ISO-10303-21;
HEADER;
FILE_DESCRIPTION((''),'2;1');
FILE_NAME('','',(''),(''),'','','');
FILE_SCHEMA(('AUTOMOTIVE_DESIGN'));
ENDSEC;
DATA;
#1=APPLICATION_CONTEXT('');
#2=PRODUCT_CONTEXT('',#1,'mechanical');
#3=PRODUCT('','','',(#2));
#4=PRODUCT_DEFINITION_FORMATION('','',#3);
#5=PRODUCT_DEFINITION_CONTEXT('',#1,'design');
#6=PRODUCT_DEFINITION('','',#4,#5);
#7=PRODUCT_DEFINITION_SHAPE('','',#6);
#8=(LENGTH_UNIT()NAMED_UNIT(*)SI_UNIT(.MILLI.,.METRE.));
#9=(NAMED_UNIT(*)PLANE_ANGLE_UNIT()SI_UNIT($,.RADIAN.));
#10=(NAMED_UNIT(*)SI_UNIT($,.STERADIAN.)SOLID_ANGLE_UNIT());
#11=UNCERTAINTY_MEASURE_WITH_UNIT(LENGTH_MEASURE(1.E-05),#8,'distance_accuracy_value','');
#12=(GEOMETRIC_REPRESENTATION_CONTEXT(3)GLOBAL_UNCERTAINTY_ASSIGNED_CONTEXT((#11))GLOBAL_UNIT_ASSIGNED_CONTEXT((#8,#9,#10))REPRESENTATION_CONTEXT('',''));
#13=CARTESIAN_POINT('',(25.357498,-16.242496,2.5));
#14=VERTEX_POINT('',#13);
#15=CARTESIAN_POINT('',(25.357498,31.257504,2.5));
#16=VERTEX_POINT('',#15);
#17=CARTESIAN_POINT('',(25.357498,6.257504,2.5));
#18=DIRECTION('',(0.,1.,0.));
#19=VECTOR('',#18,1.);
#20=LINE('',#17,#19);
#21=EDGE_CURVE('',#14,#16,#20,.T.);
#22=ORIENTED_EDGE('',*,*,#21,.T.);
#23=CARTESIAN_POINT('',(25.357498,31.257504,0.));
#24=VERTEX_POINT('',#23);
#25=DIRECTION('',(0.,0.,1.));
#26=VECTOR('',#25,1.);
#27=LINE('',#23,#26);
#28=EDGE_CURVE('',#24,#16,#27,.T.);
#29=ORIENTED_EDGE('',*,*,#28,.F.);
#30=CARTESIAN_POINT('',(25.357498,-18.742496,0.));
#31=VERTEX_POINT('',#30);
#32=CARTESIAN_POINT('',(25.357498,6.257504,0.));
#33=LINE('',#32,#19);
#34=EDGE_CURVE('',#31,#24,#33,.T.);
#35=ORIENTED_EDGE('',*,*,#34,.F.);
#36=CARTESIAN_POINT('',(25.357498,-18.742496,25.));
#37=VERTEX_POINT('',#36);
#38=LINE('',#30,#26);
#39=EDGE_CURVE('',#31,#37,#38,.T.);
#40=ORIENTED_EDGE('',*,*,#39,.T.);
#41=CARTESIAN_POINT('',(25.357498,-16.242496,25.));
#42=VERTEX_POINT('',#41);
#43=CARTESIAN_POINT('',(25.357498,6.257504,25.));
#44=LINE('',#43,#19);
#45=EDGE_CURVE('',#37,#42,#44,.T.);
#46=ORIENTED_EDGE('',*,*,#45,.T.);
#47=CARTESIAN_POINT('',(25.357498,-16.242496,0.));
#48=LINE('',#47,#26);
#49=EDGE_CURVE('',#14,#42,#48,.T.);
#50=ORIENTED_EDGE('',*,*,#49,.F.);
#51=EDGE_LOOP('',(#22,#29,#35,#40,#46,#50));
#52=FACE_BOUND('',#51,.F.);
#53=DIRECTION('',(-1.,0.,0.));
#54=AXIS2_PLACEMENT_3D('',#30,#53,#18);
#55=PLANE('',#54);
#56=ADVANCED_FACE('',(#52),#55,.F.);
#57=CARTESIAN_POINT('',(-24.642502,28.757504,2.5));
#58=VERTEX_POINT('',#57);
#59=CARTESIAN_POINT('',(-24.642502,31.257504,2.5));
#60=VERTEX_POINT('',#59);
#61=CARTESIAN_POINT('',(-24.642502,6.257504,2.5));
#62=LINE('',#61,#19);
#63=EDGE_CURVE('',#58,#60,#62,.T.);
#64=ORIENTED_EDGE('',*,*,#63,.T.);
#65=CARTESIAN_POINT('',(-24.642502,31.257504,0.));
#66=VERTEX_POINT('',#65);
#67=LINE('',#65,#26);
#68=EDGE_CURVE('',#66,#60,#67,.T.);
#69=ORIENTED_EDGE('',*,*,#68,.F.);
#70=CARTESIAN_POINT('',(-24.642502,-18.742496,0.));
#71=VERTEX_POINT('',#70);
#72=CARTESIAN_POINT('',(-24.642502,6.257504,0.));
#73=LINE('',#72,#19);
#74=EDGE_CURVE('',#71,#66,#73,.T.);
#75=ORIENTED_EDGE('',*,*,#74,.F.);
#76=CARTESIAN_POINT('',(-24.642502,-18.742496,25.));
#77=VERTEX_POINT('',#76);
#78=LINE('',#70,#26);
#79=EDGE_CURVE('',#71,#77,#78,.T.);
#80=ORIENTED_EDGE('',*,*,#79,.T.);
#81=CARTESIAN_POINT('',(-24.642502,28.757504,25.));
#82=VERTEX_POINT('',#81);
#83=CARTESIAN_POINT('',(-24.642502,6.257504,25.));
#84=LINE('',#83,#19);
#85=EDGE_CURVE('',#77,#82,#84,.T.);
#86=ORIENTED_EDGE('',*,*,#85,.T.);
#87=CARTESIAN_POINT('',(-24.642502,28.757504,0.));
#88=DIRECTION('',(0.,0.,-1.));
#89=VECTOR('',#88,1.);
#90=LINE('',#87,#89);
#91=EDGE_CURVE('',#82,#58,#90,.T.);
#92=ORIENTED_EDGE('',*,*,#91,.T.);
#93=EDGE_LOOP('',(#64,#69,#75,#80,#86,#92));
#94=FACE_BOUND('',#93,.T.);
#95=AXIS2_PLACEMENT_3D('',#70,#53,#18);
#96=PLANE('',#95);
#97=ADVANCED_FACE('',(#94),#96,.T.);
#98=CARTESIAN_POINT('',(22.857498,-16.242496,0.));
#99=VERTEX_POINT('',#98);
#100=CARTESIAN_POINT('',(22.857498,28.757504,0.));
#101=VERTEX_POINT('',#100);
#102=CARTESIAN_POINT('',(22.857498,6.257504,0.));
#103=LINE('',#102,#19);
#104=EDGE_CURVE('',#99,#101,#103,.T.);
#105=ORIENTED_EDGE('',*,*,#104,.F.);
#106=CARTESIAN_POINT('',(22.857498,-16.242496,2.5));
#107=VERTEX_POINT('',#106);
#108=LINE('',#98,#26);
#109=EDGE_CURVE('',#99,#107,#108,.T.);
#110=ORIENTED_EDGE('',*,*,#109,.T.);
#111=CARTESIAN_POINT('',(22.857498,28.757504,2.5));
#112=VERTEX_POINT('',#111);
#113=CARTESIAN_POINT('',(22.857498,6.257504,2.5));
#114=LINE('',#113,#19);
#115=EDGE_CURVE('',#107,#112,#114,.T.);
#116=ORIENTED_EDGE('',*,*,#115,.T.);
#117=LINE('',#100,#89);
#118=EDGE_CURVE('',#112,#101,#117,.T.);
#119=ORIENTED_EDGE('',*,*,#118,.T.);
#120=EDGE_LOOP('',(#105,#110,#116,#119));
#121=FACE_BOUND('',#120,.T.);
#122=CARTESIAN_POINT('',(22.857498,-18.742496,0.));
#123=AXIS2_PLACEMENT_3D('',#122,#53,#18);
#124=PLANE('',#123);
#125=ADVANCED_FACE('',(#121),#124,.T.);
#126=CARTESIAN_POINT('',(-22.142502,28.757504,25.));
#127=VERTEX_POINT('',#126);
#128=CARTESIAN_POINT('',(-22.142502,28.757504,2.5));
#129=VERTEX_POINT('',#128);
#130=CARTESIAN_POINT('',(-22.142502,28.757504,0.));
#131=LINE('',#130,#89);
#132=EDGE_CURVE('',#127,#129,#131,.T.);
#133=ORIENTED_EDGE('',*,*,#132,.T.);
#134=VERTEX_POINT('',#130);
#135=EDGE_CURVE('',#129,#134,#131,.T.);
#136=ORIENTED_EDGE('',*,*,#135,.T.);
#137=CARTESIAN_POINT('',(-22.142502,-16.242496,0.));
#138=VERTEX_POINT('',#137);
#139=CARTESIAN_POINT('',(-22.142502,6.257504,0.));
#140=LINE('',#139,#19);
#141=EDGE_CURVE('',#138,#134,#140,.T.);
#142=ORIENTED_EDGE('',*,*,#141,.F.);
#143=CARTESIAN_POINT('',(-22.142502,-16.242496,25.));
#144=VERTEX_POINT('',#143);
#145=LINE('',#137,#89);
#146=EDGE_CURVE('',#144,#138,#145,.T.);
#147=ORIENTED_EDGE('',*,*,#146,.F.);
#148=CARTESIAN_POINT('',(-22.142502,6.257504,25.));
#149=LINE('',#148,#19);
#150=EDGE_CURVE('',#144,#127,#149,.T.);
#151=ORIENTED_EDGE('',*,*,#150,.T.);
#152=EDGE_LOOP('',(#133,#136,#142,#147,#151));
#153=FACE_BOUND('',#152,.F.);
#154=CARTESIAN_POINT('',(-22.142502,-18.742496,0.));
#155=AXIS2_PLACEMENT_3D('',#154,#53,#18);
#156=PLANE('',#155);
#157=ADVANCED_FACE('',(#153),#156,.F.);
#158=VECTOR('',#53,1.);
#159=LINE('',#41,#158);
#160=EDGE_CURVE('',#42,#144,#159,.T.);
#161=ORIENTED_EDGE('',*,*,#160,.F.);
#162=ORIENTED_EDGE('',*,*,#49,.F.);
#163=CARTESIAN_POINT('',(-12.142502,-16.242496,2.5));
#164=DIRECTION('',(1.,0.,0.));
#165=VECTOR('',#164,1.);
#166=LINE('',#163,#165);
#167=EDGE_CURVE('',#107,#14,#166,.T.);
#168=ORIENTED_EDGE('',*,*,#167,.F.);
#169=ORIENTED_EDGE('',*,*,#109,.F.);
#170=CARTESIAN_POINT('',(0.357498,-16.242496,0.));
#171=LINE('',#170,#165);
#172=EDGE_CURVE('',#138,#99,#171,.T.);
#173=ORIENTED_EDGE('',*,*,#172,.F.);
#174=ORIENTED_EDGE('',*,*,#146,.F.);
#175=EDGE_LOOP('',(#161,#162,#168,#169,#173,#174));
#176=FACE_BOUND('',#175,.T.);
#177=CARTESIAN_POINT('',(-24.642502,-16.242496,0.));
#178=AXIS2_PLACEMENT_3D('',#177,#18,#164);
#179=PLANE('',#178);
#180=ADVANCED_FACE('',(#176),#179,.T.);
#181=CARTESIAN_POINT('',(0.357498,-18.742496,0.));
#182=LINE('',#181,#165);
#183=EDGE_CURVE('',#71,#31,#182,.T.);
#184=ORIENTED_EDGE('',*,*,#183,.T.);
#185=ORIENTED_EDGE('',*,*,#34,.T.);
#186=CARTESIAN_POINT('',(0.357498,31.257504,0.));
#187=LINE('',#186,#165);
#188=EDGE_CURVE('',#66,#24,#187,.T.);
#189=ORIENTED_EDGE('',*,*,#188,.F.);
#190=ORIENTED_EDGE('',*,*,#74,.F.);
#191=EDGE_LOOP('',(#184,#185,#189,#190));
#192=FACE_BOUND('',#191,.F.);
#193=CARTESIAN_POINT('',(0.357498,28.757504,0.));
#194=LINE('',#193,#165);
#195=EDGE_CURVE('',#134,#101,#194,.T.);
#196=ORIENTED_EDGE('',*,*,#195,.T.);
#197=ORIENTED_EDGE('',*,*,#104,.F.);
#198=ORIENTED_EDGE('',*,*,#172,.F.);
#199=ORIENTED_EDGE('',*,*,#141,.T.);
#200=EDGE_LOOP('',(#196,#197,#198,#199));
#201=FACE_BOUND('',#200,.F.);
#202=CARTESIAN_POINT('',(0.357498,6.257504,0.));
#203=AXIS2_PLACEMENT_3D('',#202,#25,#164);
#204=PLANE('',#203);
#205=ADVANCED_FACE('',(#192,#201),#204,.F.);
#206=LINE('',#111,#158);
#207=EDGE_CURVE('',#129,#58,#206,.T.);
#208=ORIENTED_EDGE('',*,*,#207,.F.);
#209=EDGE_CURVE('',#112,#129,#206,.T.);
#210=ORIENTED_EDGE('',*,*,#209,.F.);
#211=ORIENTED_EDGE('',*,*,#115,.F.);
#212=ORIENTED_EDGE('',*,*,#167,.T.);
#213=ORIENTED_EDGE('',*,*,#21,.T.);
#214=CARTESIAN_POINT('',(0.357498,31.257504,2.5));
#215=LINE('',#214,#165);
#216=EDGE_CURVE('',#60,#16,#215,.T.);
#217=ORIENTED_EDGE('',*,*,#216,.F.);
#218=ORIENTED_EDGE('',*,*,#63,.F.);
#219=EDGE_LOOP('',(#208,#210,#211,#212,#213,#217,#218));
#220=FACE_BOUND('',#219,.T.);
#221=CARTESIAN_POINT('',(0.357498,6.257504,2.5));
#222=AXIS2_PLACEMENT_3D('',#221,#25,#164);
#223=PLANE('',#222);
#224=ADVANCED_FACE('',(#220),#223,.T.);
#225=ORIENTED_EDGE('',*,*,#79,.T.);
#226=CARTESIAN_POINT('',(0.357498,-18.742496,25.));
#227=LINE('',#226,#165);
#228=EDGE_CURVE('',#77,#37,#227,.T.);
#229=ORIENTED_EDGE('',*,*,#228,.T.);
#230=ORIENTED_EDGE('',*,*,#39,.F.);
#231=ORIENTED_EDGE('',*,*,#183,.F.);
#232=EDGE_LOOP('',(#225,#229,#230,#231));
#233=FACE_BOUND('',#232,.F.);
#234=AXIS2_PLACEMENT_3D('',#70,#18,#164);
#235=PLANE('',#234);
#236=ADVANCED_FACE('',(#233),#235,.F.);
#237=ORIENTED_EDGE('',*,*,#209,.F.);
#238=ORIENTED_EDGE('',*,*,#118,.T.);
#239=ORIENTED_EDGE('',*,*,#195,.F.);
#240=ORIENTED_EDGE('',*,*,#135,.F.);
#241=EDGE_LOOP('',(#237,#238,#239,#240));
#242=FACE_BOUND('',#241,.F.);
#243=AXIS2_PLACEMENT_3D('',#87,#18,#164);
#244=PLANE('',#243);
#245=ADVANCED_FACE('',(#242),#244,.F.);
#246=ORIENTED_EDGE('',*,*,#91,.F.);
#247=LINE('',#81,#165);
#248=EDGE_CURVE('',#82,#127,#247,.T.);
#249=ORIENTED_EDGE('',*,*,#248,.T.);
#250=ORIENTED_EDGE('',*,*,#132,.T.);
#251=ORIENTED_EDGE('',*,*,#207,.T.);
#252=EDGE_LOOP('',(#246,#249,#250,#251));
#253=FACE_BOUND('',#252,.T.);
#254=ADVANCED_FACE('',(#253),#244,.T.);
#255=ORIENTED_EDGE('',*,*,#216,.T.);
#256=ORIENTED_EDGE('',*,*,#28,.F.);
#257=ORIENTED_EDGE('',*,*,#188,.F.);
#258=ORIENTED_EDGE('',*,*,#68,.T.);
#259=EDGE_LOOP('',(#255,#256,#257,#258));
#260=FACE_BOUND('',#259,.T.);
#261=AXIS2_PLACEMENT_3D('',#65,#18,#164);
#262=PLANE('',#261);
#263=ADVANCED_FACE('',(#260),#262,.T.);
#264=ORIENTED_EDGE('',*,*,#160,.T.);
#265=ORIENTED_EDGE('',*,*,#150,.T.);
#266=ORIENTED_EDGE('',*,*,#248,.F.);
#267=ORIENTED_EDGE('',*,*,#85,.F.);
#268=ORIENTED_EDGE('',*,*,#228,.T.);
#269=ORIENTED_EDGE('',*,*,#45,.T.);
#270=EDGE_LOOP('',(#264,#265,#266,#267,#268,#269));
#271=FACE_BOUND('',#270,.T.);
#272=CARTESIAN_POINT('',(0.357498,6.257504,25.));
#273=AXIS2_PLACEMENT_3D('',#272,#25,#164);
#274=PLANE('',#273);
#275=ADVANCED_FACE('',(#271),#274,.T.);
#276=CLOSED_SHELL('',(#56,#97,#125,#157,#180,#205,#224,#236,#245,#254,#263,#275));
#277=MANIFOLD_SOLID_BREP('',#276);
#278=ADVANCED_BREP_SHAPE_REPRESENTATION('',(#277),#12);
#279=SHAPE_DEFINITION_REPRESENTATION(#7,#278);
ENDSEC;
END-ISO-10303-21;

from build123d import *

# Parameters (mm, degrees)
F0_W     = 50
F0_H     = 50
F1_DEPTH = 25
F2_T     = -2.5
F3_T     = 2.5


# Not quite as in the source:
# - a shell that OpenCascade refuses in one call is made with other operations: the cavity is built on its own and cut out


with BuildPart() as f1:
    # F0 (on Top) → F1 (new body)
    with BuildSketch(Plane.XY):
        with Locations((0.357497856, 6.2575038522)):
            Rectangle(F0_W, F0_H)
    extrude(amount=F1_DEPTH)

    # F2
    f2_openings = [f1.faces().sort_by_distance(p)[0] for p in [
        (0.357498, 6.257504, 25),
        (0.357498, 6.257504, 0),
    ]]
    offset(amount=F2_T, openings=f2_openings)

    # F3: shell of thickness 2.5, made by hand


with BuildPart() as f3_core1:
    # F3_t2: copy of F1
    add(f1.part)

    # the walls: a layer under each face that stays
    f3_faces = [f3_core1.faces().sort_by_distance(p)[0] for p in [
        (0.357497856, -18.7424961478, 12.5),
        (-22.9758354773, -17.0758294811, 0),
        (-22.142502144, 6.2575038522, 12.5),
    ]]
    thicken(f3_faces, amount=-F3_T, mode=Mode.SUBTRACT)


with BuildPart() as f1_1:
    add(f1.part)

    # what is left inside the walls is the cavity
    f3_cavity = [f3_core1.part.solids().sort_by_distance(p)[0] for p in [
        (0.357498, 31.232504, 17.5),
    ]]
    add(f3_cavity, mode=Mode.SUBTRACT)


solid = f1_1.part
